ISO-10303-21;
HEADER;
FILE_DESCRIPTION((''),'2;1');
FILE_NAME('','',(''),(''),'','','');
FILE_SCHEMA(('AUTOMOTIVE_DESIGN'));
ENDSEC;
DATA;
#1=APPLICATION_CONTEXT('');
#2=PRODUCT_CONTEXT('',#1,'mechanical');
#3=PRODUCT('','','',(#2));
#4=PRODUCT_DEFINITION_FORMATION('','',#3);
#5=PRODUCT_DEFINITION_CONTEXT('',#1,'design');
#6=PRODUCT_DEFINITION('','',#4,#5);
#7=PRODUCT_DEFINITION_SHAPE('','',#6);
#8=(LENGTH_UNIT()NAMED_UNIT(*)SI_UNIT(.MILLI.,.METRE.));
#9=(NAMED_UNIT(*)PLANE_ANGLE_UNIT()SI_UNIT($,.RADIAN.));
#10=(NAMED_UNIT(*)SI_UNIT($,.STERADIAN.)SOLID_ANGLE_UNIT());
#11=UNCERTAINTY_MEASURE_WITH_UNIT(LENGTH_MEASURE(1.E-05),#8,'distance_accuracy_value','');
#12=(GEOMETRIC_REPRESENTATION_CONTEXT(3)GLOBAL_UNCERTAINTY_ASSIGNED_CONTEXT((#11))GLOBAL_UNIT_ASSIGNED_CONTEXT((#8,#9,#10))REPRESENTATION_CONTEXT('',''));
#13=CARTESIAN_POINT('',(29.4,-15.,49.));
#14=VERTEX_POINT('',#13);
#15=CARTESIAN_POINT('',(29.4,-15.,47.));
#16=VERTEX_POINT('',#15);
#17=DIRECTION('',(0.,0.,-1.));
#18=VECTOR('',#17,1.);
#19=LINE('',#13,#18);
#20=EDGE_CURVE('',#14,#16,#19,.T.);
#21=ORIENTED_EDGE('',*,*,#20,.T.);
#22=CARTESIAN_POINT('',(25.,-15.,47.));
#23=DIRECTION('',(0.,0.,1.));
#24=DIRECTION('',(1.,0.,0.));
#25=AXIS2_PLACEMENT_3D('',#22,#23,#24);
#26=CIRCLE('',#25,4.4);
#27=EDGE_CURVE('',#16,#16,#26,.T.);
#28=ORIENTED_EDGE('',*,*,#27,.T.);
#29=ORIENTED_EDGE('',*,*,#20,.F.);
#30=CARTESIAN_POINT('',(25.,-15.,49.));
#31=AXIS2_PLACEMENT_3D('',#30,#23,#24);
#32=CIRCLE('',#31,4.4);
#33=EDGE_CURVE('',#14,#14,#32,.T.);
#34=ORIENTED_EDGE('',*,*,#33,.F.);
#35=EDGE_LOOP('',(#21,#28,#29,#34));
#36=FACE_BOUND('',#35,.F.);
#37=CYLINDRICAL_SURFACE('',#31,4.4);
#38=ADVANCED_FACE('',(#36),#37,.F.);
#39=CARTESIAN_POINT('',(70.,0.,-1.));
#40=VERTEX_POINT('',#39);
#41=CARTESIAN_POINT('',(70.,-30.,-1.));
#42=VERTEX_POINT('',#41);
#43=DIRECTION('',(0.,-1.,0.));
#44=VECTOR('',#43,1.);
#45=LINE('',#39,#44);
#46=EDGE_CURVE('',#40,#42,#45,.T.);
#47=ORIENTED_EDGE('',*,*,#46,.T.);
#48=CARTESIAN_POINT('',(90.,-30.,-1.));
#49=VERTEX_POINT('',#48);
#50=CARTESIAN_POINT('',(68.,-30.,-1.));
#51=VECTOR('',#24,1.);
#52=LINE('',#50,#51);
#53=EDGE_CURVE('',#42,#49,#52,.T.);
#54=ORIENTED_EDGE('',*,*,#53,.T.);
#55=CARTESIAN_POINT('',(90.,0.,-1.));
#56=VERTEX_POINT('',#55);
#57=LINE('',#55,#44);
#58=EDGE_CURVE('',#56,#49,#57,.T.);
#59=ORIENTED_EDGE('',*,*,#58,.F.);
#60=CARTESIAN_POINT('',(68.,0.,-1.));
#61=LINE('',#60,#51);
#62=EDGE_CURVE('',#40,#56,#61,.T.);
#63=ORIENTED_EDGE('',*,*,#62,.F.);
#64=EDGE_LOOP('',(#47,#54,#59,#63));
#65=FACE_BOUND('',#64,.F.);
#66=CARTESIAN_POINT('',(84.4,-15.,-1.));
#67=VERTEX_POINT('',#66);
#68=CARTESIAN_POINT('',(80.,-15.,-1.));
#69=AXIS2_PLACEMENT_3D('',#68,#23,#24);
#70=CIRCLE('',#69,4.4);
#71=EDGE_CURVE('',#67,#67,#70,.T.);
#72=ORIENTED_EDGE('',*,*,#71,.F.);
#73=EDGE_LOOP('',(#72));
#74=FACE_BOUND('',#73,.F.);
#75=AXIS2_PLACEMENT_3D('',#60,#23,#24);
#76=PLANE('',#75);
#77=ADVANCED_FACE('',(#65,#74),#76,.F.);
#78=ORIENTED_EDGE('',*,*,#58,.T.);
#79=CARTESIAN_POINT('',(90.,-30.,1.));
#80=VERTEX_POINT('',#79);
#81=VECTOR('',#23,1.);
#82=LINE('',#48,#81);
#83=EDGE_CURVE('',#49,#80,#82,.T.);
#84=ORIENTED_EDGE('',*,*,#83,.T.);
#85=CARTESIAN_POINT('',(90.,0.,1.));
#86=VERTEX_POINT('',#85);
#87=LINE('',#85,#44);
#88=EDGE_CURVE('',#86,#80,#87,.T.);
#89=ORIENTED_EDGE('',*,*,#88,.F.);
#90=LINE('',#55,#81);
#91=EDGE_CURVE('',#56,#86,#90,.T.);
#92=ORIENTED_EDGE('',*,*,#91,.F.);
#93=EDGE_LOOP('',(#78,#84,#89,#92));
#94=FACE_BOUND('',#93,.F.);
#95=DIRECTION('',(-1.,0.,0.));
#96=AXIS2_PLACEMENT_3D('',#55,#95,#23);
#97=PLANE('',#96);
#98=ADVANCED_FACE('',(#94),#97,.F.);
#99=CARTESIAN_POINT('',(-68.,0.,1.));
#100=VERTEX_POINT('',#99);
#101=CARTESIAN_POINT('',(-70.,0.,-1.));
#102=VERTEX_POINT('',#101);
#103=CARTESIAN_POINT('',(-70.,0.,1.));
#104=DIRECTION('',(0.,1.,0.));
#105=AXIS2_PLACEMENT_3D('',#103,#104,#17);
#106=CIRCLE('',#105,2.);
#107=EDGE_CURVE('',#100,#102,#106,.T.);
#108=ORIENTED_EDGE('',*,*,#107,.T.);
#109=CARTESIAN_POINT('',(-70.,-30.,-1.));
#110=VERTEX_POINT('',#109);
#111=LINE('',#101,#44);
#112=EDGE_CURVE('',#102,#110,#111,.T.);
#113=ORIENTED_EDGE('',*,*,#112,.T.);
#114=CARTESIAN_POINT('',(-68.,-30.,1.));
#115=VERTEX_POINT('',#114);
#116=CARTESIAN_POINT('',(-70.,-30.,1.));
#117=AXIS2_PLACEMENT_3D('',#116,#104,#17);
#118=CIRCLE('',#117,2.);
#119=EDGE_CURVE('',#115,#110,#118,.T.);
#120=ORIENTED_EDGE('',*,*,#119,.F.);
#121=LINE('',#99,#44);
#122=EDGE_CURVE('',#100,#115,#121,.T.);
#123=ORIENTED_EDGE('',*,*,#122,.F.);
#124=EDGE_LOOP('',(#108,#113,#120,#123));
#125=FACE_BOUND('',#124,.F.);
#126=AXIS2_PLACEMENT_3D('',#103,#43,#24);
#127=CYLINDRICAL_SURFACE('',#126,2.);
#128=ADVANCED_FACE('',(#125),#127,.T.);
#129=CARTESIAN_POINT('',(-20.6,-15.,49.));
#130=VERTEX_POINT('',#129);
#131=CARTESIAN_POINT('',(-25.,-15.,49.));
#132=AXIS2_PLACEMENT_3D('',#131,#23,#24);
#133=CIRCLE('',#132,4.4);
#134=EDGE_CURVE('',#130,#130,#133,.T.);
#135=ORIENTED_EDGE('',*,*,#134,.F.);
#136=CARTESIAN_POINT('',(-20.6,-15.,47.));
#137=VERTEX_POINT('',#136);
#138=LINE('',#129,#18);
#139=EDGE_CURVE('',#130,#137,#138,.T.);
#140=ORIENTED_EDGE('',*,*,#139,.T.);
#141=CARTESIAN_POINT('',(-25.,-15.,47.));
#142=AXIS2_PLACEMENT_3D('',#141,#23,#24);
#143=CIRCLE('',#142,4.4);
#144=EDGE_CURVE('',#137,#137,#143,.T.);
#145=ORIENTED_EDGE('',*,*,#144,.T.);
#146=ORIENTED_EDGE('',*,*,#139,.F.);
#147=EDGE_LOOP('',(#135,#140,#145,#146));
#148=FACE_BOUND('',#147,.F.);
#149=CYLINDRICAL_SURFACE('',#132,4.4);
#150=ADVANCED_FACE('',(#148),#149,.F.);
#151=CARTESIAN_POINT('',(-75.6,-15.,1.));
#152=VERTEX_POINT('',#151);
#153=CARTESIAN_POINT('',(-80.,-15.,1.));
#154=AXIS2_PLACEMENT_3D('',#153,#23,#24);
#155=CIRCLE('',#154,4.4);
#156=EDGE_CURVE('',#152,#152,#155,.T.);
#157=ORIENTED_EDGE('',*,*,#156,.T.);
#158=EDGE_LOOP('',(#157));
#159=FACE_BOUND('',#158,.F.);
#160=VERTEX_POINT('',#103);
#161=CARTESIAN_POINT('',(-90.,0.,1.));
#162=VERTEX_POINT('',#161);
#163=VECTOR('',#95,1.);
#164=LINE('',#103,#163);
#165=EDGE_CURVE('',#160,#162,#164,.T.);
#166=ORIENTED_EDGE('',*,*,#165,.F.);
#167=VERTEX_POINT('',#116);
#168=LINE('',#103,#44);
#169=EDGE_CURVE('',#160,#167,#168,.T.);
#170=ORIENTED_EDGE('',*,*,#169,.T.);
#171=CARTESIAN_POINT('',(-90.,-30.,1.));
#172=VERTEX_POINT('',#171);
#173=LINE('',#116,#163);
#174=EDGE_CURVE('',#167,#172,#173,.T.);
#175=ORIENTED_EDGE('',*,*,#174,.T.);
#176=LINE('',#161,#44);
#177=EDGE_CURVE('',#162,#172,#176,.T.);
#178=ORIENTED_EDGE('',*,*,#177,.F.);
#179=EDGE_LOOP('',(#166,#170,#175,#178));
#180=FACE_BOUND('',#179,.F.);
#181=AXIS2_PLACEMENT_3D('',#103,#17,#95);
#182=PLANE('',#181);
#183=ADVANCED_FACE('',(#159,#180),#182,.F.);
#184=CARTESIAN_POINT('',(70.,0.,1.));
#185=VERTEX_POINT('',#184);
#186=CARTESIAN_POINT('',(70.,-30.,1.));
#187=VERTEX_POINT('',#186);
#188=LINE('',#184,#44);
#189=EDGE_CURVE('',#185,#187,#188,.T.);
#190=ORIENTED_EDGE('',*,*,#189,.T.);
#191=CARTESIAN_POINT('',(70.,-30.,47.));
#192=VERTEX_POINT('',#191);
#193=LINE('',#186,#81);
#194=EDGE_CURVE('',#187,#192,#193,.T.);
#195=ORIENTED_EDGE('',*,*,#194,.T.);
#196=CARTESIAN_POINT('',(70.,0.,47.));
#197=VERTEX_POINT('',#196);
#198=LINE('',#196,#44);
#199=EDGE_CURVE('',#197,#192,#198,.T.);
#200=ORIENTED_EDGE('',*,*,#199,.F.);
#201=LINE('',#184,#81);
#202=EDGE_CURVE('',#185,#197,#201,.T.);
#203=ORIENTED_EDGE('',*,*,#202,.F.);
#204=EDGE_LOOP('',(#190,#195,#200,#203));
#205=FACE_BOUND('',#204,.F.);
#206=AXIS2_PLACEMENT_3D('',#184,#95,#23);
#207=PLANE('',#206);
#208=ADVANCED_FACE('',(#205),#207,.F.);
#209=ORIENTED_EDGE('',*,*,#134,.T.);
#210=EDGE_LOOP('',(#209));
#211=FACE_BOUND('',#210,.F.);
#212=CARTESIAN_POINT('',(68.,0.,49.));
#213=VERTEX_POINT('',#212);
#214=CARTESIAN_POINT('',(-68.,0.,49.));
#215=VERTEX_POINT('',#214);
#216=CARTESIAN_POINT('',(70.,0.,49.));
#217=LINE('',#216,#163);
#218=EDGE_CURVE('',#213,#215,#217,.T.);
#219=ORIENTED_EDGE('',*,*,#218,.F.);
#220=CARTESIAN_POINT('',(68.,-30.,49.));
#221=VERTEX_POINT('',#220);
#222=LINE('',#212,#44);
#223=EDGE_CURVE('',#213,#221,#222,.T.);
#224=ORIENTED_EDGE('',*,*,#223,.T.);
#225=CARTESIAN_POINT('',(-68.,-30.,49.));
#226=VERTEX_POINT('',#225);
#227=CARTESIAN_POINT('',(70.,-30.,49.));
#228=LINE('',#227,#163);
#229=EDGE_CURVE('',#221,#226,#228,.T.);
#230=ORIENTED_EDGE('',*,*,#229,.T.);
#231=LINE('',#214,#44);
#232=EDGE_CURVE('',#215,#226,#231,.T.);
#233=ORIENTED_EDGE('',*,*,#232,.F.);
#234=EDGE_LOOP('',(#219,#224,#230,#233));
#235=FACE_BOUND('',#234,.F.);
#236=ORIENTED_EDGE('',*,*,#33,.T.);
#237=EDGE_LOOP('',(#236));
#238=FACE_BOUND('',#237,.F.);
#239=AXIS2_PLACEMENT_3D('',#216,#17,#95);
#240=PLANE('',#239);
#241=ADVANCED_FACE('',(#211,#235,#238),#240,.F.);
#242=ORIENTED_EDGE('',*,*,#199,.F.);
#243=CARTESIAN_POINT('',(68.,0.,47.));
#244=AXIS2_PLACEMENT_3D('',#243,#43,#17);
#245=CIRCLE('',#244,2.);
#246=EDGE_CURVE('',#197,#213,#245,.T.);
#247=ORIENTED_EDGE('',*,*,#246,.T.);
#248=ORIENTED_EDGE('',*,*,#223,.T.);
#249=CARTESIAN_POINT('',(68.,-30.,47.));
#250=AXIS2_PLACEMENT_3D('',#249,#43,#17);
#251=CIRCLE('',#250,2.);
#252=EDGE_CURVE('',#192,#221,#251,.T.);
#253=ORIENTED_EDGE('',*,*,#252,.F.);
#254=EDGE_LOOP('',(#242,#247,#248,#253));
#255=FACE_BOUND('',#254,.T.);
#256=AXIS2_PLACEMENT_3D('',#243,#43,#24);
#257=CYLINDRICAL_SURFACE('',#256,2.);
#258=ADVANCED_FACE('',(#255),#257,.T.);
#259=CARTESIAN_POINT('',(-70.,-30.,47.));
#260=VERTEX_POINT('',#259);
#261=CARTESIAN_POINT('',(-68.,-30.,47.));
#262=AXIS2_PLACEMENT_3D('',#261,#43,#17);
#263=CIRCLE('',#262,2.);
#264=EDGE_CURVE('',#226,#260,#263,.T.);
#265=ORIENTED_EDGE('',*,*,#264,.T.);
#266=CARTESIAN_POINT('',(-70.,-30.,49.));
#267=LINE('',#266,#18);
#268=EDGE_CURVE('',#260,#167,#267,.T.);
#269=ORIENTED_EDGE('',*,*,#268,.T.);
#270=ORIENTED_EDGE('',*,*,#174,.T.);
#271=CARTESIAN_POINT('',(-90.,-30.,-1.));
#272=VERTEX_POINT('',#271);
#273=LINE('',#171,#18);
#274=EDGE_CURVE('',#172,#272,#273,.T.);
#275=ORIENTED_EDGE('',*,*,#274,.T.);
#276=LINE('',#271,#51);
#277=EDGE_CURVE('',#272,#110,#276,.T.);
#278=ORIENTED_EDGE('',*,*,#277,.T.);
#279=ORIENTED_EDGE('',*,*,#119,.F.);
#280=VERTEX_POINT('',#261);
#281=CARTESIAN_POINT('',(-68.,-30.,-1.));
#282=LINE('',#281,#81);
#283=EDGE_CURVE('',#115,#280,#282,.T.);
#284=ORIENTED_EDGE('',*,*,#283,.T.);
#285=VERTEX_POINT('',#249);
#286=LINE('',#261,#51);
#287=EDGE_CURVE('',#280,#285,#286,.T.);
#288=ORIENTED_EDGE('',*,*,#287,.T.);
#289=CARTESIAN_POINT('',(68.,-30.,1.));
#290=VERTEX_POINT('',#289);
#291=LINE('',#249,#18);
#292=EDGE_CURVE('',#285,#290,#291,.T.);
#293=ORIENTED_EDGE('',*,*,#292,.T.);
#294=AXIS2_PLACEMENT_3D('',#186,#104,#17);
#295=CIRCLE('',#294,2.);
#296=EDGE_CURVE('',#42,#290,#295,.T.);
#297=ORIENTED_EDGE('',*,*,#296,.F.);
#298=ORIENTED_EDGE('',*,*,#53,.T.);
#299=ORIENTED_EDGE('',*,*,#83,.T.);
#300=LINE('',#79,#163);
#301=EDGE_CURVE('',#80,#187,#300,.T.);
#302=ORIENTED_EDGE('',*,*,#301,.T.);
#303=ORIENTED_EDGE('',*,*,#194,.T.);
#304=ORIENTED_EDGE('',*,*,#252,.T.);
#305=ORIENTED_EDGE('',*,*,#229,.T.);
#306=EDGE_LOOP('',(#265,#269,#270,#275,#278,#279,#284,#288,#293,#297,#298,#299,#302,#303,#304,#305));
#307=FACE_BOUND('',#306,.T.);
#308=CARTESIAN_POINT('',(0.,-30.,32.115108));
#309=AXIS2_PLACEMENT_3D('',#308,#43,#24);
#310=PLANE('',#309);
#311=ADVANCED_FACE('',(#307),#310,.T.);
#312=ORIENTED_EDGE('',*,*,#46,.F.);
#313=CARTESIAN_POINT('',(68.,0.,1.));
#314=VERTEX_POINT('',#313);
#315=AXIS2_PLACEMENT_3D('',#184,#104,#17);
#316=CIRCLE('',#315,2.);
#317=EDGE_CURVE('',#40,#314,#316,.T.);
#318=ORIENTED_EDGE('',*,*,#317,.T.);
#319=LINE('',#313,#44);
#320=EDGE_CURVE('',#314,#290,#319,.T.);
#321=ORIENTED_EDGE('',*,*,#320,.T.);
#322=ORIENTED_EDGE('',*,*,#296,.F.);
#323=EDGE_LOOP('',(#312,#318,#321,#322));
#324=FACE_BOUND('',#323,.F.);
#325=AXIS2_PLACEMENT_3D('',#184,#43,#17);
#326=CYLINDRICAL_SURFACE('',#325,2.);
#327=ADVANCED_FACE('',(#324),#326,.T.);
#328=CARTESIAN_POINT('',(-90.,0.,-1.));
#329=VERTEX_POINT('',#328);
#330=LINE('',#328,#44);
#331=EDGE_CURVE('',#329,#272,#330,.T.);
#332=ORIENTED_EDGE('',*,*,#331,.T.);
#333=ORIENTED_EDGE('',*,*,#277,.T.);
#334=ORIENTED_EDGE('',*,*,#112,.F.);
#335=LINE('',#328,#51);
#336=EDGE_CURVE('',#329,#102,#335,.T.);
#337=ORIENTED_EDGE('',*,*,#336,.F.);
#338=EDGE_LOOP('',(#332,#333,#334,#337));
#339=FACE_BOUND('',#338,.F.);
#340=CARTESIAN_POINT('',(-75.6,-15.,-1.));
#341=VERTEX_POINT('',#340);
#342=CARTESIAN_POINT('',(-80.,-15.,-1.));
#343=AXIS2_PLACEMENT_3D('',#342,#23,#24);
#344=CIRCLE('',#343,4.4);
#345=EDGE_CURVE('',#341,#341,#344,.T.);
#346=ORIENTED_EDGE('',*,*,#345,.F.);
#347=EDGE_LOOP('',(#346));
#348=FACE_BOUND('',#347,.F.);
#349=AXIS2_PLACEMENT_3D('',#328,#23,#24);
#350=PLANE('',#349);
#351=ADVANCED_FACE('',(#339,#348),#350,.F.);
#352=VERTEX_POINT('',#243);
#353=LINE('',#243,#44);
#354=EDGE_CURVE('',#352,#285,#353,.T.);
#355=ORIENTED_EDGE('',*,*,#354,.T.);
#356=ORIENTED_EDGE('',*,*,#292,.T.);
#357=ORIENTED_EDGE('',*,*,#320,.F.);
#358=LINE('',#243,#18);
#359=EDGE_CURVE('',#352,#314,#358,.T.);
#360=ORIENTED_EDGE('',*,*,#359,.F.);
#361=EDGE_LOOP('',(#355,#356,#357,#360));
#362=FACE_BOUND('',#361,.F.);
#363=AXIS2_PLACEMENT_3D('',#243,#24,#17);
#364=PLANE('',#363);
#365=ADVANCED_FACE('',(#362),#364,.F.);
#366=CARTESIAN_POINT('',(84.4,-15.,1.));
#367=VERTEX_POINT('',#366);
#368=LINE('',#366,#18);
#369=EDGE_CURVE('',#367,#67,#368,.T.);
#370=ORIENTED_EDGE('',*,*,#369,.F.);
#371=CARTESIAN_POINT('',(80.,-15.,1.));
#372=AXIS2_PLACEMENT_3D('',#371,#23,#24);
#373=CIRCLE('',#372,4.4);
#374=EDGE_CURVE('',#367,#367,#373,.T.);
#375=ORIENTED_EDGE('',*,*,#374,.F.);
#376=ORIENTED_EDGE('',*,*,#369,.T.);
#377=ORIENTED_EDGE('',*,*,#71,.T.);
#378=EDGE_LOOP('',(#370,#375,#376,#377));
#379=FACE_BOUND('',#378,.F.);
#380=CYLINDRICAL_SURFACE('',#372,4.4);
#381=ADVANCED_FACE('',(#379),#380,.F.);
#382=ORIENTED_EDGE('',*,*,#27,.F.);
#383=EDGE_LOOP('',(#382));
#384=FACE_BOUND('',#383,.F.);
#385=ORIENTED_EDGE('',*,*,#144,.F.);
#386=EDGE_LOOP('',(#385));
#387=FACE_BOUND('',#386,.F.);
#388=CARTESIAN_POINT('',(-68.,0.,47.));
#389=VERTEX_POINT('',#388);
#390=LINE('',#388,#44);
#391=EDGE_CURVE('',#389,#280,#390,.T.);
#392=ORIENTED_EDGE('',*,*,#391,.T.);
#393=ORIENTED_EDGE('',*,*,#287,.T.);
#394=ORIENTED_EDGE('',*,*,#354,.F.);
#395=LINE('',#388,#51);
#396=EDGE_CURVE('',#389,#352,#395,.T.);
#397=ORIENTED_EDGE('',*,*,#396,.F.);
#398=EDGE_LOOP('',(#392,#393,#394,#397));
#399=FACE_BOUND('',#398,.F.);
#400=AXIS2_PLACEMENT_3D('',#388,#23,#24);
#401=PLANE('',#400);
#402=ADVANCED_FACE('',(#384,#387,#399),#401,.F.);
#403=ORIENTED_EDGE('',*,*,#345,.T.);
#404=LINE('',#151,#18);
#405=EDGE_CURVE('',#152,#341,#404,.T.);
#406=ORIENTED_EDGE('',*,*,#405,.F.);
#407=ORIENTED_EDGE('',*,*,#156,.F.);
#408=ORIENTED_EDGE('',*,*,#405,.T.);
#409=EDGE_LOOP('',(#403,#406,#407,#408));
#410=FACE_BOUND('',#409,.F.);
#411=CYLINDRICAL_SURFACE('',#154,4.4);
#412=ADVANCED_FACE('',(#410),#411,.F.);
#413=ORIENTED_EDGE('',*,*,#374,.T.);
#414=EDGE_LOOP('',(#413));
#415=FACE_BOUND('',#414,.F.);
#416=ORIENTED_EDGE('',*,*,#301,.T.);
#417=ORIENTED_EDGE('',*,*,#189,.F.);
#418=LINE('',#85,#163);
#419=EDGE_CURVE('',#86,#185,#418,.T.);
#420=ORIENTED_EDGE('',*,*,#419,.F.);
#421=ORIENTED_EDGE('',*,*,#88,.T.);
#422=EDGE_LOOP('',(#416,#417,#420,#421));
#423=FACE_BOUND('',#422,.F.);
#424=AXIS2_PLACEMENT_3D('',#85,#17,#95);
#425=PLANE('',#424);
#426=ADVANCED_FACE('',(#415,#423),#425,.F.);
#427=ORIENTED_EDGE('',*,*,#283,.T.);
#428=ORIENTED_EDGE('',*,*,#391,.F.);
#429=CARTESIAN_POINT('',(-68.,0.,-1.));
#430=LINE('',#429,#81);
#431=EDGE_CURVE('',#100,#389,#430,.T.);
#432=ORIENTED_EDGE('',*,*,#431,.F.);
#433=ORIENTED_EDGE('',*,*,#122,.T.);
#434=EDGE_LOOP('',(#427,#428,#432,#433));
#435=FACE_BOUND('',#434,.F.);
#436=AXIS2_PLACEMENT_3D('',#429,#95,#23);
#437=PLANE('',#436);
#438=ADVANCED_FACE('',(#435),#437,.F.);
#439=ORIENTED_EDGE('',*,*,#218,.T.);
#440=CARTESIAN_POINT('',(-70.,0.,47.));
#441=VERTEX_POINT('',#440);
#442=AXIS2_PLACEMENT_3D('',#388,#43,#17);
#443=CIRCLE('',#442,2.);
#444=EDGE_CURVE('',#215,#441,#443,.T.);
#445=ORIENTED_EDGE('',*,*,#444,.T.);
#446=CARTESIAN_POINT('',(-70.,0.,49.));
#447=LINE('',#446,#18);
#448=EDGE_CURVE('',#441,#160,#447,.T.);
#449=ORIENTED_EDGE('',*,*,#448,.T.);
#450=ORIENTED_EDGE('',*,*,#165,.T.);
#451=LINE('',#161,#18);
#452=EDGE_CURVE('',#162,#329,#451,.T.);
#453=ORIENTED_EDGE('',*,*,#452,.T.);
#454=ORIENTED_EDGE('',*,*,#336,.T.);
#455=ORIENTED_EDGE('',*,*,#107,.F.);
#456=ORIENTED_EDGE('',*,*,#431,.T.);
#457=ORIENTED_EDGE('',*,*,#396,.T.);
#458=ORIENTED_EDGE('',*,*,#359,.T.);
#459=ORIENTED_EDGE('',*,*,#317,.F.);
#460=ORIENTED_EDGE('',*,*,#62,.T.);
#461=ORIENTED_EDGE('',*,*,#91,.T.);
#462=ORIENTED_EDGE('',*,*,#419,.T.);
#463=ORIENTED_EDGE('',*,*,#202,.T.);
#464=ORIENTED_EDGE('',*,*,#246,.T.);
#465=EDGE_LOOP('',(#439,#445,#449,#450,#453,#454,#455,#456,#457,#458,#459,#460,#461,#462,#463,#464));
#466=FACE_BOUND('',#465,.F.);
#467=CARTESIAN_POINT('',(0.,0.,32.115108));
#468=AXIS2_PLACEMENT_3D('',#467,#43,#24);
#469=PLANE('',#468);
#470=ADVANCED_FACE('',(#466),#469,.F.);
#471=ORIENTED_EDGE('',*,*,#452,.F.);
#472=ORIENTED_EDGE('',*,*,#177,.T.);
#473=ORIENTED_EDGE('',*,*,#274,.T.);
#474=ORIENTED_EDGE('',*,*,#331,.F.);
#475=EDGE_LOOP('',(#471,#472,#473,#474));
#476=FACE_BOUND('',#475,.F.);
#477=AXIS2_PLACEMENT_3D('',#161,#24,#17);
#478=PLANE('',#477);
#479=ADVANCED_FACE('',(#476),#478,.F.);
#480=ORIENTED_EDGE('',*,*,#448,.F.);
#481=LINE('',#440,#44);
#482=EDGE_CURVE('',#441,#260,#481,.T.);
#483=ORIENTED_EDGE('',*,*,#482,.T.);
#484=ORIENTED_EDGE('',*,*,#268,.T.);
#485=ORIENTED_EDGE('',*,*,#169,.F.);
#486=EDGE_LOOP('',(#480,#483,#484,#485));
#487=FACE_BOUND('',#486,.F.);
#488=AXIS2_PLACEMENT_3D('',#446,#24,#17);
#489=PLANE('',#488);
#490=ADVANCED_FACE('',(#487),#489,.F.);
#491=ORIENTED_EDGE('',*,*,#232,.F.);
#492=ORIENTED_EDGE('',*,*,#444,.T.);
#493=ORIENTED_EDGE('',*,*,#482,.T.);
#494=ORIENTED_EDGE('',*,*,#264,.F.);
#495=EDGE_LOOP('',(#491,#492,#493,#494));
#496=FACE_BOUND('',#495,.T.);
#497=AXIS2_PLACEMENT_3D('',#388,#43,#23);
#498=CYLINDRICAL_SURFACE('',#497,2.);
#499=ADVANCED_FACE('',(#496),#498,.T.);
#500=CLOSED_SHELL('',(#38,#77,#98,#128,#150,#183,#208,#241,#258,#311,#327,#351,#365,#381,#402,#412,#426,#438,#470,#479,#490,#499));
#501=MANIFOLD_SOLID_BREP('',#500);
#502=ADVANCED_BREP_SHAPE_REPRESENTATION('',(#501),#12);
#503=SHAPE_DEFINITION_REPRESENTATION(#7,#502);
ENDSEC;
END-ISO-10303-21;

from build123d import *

# Parameters (mm, degrees)
F1_DEPTH = 30
F2_R     = 4.4
F3_R     = 4.4
F4_DEPTH = 25
F5_R     = 2
F6_R     = 2


# Not quite as in the source:
# - a feature names something its author has since deleted; it is built from what else it names


with BuildPart() as f1:
    # F0 (on Front) → F1 (new body)
    with BuildSketch(Plane.XZ):
        Polygon((90, -1), (90, 1), (70, 1), (70, 49), (-70, 49), (-70, 1), (-90, 1), (-90, -1), (-68, -1), (-68, 47), (68, 47), (68, -1), align=None)
    extrude(amount=F1_DEPTH)

    # F2 (on face) + F3 (on face) → F4 (cut)
    with BuildSketch(Plane.XY.offset(1)):
        with Locations((-80, -15)):
            Circle(F2_R)
        with Locations((80, -15)):
            Circle(F2_R)
    with BuildSketch(Plane.XY.offset(49)):
        with Locations((-25, -15)):
            Circle(F3_R)
        with Locations((25, -15)):
            Circle(F3_R)
    extrude(amount=-F4_DEPTH, mode=Mode.SUBTRACT)

    # F5
    f5_edges = [f1.edges().sort_by_distance(p)[0] for p in [
        (-70, -15, 49),
        (70, -15, 49),
    ]]
    fillet(f5_edges, radius=F5_R)

    # F6
    f6_edges = [f1.edges().sort_by_distance(p)[0] for p in [
        (68, -15, -1),
        (-68, -15, -1),
    ]]
    fillet(f6_edges, radius=F6_R)


solid = f1.part
